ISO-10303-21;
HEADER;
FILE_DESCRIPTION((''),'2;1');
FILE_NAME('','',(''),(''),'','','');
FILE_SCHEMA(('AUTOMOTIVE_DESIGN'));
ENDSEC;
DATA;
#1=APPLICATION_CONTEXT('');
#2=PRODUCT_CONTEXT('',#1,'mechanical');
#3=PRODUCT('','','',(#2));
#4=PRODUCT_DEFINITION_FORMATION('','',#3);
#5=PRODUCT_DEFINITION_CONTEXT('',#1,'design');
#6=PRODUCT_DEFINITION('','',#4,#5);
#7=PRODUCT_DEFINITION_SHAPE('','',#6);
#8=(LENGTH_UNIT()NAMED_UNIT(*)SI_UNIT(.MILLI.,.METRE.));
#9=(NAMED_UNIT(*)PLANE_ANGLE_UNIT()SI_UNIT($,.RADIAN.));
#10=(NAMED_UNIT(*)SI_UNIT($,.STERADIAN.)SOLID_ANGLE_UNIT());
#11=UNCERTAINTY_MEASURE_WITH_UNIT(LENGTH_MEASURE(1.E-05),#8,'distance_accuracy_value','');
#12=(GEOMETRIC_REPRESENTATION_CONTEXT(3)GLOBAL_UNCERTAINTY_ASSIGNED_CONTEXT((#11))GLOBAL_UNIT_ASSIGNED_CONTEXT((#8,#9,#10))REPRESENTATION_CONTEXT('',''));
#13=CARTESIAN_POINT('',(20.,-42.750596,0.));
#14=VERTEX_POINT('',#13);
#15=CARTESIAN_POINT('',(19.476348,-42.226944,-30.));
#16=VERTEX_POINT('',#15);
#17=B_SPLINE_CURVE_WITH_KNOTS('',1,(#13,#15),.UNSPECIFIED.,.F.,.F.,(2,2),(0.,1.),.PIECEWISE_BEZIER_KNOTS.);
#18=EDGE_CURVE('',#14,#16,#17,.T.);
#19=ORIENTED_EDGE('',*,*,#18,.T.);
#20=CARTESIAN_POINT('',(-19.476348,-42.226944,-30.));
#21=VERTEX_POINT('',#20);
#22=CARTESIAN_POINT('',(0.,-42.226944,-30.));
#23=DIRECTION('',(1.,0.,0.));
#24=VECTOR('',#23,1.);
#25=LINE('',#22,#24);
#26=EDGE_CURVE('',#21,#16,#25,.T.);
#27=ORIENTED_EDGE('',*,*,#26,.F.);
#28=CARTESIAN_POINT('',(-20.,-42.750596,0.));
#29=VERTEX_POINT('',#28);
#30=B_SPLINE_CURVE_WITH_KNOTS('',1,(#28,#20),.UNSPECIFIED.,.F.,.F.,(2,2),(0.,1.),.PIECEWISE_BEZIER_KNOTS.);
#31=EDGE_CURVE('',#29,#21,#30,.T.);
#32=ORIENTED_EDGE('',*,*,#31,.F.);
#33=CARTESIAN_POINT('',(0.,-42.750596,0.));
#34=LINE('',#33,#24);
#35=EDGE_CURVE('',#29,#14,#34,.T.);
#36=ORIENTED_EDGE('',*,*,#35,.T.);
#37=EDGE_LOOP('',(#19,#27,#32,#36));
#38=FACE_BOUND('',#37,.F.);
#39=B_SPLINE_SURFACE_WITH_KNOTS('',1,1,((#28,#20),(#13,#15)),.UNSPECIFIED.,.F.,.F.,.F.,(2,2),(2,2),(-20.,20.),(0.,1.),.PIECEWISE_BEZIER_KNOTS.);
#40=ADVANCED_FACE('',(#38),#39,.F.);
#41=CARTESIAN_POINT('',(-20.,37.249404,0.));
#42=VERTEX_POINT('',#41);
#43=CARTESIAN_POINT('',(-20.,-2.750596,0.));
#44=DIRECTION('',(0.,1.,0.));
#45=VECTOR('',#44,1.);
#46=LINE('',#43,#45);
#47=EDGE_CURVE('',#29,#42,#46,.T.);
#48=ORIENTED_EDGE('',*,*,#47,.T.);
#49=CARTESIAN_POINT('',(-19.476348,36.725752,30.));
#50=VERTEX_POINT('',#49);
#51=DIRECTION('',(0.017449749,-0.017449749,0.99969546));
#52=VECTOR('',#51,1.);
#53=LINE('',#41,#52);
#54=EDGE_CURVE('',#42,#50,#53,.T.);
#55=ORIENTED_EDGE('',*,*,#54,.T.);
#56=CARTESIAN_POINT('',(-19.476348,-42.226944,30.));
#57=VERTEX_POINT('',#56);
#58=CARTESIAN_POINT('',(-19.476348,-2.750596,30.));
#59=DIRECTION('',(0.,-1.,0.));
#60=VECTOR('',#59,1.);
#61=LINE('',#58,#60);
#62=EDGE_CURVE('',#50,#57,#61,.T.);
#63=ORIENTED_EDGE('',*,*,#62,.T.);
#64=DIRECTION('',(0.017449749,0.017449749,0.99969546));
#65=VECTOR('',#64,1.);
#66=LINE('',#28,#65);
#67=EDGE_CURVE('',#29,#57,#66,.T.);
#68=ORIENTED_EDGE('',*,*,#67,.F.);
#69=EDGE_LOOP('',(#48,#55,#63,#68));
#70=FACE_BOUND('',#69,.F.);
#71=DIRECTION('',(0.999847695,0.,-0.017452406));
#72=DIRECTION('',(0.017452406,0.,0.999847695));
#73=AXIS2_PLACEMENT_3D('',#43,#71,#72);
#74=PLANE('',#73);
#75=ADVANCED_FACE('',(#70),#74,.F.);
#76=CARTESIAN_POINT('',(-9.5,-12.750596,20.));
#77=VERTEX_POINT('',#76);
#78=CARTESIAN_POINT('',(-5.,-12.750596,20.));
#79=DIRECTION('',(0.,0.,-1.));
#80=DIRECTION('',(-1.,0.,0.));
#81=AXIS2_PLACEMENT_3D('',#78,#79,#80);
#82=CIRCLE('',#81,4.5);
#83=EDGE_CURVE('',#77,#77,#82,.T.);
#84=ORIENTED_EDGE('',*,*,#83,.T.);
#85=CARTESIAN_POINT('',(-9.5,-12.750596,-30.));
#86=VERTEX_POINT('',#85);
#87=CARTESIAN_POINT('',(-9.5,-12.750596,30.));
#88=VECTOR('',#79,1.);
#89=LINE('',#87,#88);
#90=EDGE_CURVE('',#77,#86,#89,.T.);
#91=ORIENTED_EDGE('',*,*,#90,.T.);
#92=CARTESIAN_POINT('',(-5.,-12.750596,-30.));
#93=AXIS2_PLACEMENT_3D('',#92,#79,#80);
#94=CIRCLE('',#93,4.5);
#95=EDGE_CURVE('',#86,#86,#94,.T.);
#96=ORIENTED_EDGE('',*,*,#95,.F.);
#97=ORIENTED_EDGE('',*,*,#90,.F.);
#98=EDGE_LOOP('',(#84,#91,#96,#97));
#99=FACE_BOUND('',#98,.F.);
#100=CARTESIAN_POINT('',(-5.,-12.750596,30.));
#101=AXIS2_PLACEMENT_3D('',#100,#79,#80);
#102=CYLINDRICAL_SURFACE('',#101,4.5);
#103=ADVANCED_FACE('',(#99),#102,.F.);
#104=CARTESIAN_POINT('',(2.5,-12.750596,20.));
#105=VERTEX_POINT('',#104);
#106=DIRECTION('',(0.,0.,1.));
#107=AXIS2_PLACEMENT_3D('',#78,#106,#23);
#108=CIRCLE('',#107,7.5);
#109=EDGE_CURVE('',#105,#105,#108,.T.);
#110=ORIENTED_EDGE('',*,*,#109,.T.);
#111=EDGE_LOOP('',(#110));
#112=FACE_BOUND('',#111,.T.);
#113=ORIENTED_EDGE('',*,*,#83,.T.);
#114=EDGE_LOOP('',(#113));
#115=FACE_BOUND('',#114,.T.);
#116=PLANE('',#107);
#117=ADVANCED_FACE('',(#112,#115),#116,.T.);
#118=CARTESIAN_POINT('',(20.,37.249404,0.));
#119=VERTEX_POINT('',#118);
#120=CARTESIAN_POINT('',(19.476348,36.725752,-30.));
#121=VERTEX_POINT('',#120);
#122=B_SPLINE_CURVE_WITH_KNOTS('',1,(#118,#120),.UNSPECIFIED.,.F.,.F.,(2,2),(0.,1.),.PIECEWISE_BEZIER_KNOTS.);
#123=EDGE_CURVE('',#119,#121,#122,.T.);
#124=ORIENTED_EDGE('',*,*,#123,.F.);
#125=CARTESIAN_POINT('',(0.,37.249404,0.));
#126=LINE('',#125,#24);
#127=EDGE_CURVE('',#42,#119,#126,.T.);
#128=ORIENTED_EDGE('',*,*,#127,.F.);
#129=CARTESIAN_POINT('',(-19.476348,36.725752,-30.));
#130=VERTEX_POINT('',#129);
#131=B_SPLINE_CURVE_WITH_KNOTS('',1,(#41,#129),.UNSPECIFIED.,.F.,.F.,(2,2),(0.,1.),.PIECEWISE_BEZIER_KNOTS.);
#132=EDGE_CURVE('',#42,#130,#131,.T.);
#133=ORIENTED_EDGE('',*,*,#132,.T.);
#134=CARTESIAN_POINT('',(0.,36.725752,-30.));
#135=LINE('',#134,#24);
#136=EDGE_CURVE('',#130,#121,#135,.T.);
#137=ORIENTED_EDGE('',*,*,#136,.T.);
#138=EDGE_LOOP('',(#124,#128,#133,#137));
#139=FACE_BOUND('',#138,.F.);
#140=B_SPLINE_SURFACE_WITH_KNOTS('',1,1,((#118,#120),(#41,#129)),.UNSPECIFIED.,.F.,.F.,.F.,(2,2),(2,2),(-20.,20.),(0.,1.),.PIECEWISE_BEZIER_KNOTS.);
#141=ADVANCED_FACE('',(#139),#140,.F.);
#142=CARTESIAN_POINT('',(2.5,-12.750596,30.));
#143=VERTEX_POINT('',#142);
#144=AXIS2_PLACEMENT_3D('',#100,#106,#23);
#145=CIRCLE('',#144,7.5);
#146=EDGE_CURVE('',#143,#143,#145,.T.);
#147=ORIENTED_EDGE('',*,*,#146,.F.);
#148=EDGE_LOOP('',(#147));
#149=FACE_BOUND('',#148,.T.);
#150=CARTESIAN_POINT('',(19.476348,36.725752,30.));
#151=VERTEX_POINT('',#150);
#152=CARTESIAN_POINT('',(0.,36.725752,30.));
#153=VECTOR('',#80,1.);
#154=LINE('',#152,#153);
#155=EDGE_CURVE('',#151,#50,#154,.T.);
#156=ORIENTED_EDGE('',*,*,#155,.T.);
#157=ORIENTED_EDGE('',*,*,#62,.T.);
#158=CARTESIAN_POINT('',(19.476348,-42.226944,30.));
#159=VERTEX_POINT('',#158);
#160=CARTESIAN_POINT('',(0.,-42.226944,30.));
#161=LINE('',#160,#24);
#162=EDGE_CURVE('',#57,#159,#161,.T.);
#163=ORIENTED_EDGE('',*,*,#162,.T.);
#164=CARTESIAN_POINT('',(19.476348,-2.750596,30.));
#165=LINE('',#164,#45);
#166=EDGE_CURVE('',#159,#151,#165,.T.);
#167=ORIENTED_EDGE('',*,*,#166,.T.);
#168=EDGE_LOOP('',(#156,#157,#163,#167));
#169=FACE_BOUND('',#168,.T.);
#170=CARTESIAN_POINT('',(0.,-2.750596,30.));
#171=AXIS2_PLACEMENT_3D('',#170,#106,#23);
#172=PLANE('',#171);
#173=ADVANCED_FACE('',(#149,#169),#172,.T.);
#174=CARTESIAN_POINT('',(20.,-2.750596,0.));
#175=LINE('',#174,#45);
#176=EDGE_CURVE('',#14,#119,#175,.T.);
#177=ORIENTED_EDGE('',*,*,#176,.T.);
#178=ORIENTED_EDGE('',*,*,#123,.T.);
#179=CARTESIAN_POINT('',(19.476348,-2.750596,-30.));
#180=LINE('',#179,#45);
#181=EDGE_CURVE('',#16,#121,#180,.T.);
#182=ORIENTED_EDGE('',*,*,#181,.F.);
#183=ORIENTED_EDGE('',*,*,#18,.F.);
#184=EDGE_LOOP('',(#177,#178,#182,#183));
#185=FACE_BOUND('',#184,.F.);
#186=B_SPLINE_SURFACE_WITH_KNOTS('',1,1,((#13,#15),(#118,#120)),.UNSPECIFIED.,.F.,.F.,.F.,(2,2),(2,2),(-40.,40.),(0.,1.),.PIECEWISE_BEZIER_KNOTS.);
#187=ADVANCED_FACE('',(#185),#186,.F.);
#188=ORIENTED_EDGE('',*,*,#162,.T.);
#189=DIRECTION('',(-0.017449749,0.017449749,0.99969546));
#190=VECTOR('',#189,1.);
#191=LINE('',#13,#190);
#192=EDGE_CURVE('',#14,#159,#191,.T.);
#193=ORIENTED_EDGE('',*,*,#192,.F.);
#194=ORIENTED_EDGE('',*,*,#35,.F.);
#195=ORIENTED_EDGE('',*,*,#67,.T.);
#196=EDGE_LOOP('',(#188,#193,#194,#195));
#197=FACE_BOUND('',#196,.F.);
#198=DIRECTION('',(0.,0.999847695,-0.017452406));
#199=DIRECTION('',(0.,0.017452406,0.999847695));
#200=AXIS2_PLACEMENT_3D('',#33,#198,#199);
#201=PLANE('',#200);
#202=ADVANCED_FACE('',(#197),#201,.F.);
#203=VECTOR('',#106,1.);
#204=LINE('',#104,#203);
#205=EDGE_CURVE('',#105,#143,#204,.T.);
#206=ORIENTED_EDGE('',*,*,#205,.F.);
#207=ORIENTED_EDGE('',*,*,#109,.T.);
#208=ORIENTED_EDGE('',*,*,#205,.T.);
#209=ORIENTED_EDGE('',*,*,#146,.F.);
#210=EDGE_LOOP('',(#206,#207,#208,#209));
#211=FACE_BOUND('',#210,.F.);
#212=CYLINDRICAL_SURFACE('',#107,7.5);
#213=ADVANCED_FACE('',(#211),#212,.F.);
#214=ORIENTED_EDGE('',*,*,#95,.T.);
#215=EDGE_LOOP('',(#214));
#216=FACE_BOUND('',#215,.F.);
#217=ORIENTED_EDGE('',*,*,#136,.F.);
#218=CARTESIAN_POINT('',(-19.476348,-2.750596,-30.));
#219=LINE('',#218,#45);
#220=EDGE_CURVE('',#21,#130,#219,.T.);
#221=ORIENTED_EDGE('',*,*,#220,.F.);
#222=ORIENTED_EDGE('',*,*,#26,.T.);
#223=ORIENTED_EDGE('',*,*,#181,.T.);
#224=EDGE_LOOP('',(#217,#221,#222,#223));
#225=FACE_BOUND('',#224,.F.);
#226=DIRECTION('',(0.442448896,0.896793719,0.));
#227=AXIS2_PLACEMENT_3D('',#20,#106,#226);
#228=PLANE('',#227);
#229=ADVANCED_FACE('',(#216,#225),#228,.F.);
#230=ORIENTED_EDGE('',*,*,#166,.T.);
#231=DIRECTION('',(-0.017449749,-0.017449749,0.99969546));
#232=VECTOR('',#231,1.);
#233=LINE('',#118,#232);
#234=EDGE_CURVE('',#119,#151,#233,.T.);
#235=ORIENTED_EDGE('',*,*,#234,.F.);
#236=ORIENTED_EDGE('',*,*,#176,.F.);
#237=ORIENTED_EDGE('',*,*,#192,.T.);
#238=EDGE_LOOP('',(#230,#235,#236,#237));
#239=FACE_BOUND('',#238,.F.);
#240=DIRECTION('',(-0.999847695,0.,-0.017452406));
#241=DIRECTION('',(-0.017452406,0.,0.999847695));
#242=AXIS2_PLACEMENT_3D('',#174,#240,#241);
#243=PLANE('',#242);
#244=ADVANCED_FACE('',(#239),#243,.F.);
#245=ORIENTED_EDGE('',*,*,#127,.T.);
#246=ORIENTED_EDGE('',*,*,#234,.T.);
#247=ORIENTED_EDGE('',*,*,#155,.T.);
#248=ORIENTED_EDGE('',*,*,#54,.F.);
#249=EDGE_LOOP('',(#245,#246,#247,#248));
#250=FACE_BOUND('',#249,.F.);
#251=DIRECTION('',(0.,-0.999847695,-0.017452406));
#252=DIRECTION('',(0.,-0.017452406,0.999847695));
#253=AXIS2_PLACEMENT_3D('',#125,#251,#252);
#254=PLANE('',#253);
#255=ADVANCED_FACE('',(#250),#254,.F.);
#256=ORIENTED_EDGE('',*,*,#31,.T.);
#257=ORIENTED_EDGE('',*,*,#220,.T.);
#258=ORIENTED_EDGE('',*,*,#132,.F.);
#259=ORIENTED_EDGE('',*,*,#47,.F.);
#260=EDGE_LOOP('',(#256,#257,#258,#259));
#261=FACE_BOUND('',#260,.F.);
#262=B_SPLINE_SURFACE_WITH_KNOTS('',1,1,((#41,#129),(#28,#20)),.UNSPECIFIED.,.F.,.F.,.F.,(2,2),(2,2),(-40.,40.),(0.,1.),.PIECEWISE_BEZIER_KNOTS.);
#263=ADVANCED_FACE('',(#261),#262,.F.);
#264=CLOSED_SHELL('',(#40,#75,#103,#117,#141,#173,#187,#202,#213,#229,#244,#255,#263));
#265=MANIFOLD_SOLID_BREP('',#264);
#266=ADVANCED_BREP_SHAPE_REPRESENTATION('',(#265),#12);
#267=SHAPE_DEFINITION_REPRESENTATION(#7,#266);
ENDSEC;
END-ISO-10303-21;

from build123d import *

# Parameters (mm, degrees)
F0_W           = 40
F0_H           = 80
F1_DEPTH       = 30
F1_TAPER       = 1
F3_D           = 9
F3_CBORE_D     = 15
F3_CBORE_DEPTH = 10


with BuildPart() as f1:
    # F0 (on Top) → F1 (new body, symmetric)
    with BuildSketch(Plane.XY):
        with Locations((0, -2.7505960315)):
            Rectangle(F0_W, F0_H)
    extrude(amount=F1_DEPTH, both=True, taper=F1_TAPER)

    # F3 (through all)
    with Locations(Plane.XY.offset(30)):
        with Locations((-5, -12.7505960315)):
            CounterBoreHole(F3_D / 2, F3_CBORE_D / 2, F3_CBORE_DEPTH)


solid = f1.part
